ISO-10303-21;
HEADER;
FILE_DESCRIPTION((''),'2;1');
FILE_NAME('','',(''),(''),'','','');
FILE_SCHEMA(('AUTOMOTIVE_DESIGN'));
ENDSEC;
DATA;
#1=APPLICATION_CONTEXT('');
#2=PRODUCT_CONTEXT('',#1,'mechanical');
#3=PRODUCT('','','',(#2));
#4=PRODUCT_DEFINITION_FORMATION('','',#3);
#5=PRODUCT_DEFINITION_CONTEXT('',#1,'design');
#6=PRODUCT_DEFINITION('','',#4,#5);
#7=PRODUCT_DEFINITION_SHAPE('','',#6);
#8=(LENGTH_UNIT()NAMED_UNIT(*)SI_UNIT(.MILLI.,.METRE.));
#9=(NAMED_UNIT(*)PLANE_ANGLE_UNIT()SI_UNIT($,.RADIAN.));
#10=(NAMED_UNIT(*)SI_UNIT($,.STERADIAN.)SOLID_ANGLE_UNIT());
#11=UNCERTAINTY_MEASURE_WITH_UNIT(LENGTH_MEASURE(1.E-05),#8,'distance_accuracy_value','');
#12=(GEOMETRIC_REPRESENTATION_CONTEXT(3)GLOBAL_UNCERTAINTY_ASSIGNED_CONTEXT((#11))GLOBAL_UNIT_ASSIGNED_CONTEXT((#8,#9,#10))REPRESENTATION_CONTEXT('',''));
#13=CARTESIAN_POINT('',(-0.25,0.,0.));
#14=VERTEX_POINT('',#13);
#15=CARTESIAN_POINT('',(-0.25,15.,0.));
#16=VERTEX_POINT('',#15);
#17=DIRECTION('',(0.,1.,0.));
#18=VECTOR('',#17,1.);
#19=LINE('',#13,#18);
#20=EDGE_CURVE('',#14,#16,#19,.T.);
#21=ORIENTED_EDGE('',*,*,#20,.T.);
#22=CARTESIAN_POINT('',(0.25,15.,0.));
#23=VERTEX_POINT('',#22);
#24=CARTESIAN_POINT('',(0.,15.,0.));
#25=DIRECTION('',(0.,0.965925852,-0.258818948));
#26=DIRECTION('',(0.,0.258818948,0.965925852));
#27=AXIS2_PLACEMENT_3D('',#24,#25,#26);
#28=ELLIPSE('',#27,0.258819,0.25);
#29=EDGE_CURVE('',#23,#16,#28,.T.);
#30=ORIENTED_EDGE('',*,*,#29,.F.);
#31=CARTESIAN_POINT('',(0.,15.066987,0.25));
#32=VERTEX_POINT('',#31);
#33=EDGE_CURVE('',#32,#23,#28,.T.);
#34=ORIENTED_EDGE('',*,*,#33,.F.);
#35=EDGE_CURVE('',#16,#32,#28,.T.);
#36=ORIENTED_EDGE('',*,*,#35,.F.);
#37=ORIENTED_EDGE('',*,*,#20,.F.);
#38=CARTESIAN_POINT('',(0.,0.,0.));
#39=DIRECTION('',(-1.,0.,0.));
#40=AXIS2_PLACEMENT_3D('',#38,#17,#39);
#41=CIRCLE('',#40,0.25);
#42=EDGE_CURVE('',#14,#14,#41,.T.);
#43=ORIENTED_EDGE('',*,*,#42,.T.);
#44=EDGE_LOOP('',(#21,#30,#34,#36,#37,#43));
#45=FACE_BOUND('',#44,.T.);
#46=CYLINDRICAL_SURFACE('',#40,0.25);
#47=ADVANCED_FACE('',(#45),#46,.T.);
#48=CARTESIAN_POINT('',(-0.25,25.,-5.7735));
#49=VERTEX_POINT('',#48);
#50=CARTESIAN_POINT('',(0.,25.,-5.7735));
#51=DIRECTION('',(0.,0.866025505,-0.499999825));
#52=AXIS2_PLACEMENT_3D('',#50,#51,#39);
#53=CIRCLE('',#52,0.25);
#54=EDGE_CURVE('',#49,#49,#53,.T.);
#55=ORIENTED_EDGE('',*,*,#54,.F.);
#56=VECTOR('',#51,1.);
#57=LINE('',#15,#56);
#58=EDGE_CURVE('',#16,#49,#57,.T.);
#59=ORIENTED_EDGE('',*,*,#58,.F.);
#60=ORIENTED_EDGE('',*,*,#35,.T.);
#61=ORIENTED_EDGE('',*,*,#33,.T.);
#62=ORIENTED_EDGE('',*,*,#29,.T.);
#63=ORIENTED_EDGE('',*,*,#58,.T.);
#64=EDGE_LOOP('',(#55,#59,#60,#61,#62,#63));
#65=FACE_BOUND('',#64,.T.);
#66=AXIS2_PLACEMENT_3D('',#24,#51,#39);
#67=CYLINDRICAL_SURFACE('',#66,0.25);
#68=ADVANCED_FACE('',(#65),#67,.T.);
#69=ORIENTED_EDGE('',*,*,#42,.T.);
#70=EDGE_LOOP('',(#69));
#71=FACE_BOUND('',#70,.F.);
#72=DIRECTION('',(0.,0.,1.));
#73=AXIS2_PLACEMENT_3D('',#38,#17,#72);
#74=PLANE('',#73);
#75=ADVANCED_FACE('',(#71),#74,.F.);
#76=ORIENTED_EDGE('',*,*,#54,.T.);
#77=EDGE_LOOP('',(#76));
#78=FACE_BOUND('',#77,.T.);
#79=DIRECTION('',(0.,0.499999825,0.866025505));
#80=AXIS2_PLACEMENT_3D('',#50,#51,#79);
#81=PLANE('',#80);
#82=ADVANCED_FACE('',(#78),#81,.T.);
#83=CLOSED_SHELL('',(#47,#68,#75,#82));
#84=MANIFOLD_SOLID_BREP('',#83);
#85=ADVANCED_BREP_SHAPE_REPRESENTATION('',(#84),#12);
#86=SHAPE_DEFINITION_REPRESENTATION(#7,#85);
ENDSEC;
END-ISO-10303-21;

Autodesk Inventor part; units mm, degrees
ref_plane "YZ Plane" through (0, 0, 0) normal (1, 0, 0) x (0, 1, 0)
ref_plane "XZ Plane" through (0, 0, 0) normal (0, 1, 0) x (-1, 0, 0)
ref_plane "XY Plane" through (0, 0, 0) normal (0, 0, 1) x (1, 0, 0)
sketch "Sketch1" plane through (0, 0, 0) normal (0, 1, 0) x (-1, 0, 0)
  circle A0 centre (0, 0) radius 0.25
  dimension "d0" = 0.5
sketch "Sketch2" plane through (0, 0, 0) normal (1, 0, 0) x (0, 1, 0)
  line L0 (0, 0) -> (15, 0)
  line L1 (15, 0) -> (25, -5.7735)
  dimension "d1" = 15
  dimension "d2" = 150
  dimension "d3" = 10
sweep "Sweep1" add profiles "Sketch1" path "Sketch2"
properties part number "cable 30°"
